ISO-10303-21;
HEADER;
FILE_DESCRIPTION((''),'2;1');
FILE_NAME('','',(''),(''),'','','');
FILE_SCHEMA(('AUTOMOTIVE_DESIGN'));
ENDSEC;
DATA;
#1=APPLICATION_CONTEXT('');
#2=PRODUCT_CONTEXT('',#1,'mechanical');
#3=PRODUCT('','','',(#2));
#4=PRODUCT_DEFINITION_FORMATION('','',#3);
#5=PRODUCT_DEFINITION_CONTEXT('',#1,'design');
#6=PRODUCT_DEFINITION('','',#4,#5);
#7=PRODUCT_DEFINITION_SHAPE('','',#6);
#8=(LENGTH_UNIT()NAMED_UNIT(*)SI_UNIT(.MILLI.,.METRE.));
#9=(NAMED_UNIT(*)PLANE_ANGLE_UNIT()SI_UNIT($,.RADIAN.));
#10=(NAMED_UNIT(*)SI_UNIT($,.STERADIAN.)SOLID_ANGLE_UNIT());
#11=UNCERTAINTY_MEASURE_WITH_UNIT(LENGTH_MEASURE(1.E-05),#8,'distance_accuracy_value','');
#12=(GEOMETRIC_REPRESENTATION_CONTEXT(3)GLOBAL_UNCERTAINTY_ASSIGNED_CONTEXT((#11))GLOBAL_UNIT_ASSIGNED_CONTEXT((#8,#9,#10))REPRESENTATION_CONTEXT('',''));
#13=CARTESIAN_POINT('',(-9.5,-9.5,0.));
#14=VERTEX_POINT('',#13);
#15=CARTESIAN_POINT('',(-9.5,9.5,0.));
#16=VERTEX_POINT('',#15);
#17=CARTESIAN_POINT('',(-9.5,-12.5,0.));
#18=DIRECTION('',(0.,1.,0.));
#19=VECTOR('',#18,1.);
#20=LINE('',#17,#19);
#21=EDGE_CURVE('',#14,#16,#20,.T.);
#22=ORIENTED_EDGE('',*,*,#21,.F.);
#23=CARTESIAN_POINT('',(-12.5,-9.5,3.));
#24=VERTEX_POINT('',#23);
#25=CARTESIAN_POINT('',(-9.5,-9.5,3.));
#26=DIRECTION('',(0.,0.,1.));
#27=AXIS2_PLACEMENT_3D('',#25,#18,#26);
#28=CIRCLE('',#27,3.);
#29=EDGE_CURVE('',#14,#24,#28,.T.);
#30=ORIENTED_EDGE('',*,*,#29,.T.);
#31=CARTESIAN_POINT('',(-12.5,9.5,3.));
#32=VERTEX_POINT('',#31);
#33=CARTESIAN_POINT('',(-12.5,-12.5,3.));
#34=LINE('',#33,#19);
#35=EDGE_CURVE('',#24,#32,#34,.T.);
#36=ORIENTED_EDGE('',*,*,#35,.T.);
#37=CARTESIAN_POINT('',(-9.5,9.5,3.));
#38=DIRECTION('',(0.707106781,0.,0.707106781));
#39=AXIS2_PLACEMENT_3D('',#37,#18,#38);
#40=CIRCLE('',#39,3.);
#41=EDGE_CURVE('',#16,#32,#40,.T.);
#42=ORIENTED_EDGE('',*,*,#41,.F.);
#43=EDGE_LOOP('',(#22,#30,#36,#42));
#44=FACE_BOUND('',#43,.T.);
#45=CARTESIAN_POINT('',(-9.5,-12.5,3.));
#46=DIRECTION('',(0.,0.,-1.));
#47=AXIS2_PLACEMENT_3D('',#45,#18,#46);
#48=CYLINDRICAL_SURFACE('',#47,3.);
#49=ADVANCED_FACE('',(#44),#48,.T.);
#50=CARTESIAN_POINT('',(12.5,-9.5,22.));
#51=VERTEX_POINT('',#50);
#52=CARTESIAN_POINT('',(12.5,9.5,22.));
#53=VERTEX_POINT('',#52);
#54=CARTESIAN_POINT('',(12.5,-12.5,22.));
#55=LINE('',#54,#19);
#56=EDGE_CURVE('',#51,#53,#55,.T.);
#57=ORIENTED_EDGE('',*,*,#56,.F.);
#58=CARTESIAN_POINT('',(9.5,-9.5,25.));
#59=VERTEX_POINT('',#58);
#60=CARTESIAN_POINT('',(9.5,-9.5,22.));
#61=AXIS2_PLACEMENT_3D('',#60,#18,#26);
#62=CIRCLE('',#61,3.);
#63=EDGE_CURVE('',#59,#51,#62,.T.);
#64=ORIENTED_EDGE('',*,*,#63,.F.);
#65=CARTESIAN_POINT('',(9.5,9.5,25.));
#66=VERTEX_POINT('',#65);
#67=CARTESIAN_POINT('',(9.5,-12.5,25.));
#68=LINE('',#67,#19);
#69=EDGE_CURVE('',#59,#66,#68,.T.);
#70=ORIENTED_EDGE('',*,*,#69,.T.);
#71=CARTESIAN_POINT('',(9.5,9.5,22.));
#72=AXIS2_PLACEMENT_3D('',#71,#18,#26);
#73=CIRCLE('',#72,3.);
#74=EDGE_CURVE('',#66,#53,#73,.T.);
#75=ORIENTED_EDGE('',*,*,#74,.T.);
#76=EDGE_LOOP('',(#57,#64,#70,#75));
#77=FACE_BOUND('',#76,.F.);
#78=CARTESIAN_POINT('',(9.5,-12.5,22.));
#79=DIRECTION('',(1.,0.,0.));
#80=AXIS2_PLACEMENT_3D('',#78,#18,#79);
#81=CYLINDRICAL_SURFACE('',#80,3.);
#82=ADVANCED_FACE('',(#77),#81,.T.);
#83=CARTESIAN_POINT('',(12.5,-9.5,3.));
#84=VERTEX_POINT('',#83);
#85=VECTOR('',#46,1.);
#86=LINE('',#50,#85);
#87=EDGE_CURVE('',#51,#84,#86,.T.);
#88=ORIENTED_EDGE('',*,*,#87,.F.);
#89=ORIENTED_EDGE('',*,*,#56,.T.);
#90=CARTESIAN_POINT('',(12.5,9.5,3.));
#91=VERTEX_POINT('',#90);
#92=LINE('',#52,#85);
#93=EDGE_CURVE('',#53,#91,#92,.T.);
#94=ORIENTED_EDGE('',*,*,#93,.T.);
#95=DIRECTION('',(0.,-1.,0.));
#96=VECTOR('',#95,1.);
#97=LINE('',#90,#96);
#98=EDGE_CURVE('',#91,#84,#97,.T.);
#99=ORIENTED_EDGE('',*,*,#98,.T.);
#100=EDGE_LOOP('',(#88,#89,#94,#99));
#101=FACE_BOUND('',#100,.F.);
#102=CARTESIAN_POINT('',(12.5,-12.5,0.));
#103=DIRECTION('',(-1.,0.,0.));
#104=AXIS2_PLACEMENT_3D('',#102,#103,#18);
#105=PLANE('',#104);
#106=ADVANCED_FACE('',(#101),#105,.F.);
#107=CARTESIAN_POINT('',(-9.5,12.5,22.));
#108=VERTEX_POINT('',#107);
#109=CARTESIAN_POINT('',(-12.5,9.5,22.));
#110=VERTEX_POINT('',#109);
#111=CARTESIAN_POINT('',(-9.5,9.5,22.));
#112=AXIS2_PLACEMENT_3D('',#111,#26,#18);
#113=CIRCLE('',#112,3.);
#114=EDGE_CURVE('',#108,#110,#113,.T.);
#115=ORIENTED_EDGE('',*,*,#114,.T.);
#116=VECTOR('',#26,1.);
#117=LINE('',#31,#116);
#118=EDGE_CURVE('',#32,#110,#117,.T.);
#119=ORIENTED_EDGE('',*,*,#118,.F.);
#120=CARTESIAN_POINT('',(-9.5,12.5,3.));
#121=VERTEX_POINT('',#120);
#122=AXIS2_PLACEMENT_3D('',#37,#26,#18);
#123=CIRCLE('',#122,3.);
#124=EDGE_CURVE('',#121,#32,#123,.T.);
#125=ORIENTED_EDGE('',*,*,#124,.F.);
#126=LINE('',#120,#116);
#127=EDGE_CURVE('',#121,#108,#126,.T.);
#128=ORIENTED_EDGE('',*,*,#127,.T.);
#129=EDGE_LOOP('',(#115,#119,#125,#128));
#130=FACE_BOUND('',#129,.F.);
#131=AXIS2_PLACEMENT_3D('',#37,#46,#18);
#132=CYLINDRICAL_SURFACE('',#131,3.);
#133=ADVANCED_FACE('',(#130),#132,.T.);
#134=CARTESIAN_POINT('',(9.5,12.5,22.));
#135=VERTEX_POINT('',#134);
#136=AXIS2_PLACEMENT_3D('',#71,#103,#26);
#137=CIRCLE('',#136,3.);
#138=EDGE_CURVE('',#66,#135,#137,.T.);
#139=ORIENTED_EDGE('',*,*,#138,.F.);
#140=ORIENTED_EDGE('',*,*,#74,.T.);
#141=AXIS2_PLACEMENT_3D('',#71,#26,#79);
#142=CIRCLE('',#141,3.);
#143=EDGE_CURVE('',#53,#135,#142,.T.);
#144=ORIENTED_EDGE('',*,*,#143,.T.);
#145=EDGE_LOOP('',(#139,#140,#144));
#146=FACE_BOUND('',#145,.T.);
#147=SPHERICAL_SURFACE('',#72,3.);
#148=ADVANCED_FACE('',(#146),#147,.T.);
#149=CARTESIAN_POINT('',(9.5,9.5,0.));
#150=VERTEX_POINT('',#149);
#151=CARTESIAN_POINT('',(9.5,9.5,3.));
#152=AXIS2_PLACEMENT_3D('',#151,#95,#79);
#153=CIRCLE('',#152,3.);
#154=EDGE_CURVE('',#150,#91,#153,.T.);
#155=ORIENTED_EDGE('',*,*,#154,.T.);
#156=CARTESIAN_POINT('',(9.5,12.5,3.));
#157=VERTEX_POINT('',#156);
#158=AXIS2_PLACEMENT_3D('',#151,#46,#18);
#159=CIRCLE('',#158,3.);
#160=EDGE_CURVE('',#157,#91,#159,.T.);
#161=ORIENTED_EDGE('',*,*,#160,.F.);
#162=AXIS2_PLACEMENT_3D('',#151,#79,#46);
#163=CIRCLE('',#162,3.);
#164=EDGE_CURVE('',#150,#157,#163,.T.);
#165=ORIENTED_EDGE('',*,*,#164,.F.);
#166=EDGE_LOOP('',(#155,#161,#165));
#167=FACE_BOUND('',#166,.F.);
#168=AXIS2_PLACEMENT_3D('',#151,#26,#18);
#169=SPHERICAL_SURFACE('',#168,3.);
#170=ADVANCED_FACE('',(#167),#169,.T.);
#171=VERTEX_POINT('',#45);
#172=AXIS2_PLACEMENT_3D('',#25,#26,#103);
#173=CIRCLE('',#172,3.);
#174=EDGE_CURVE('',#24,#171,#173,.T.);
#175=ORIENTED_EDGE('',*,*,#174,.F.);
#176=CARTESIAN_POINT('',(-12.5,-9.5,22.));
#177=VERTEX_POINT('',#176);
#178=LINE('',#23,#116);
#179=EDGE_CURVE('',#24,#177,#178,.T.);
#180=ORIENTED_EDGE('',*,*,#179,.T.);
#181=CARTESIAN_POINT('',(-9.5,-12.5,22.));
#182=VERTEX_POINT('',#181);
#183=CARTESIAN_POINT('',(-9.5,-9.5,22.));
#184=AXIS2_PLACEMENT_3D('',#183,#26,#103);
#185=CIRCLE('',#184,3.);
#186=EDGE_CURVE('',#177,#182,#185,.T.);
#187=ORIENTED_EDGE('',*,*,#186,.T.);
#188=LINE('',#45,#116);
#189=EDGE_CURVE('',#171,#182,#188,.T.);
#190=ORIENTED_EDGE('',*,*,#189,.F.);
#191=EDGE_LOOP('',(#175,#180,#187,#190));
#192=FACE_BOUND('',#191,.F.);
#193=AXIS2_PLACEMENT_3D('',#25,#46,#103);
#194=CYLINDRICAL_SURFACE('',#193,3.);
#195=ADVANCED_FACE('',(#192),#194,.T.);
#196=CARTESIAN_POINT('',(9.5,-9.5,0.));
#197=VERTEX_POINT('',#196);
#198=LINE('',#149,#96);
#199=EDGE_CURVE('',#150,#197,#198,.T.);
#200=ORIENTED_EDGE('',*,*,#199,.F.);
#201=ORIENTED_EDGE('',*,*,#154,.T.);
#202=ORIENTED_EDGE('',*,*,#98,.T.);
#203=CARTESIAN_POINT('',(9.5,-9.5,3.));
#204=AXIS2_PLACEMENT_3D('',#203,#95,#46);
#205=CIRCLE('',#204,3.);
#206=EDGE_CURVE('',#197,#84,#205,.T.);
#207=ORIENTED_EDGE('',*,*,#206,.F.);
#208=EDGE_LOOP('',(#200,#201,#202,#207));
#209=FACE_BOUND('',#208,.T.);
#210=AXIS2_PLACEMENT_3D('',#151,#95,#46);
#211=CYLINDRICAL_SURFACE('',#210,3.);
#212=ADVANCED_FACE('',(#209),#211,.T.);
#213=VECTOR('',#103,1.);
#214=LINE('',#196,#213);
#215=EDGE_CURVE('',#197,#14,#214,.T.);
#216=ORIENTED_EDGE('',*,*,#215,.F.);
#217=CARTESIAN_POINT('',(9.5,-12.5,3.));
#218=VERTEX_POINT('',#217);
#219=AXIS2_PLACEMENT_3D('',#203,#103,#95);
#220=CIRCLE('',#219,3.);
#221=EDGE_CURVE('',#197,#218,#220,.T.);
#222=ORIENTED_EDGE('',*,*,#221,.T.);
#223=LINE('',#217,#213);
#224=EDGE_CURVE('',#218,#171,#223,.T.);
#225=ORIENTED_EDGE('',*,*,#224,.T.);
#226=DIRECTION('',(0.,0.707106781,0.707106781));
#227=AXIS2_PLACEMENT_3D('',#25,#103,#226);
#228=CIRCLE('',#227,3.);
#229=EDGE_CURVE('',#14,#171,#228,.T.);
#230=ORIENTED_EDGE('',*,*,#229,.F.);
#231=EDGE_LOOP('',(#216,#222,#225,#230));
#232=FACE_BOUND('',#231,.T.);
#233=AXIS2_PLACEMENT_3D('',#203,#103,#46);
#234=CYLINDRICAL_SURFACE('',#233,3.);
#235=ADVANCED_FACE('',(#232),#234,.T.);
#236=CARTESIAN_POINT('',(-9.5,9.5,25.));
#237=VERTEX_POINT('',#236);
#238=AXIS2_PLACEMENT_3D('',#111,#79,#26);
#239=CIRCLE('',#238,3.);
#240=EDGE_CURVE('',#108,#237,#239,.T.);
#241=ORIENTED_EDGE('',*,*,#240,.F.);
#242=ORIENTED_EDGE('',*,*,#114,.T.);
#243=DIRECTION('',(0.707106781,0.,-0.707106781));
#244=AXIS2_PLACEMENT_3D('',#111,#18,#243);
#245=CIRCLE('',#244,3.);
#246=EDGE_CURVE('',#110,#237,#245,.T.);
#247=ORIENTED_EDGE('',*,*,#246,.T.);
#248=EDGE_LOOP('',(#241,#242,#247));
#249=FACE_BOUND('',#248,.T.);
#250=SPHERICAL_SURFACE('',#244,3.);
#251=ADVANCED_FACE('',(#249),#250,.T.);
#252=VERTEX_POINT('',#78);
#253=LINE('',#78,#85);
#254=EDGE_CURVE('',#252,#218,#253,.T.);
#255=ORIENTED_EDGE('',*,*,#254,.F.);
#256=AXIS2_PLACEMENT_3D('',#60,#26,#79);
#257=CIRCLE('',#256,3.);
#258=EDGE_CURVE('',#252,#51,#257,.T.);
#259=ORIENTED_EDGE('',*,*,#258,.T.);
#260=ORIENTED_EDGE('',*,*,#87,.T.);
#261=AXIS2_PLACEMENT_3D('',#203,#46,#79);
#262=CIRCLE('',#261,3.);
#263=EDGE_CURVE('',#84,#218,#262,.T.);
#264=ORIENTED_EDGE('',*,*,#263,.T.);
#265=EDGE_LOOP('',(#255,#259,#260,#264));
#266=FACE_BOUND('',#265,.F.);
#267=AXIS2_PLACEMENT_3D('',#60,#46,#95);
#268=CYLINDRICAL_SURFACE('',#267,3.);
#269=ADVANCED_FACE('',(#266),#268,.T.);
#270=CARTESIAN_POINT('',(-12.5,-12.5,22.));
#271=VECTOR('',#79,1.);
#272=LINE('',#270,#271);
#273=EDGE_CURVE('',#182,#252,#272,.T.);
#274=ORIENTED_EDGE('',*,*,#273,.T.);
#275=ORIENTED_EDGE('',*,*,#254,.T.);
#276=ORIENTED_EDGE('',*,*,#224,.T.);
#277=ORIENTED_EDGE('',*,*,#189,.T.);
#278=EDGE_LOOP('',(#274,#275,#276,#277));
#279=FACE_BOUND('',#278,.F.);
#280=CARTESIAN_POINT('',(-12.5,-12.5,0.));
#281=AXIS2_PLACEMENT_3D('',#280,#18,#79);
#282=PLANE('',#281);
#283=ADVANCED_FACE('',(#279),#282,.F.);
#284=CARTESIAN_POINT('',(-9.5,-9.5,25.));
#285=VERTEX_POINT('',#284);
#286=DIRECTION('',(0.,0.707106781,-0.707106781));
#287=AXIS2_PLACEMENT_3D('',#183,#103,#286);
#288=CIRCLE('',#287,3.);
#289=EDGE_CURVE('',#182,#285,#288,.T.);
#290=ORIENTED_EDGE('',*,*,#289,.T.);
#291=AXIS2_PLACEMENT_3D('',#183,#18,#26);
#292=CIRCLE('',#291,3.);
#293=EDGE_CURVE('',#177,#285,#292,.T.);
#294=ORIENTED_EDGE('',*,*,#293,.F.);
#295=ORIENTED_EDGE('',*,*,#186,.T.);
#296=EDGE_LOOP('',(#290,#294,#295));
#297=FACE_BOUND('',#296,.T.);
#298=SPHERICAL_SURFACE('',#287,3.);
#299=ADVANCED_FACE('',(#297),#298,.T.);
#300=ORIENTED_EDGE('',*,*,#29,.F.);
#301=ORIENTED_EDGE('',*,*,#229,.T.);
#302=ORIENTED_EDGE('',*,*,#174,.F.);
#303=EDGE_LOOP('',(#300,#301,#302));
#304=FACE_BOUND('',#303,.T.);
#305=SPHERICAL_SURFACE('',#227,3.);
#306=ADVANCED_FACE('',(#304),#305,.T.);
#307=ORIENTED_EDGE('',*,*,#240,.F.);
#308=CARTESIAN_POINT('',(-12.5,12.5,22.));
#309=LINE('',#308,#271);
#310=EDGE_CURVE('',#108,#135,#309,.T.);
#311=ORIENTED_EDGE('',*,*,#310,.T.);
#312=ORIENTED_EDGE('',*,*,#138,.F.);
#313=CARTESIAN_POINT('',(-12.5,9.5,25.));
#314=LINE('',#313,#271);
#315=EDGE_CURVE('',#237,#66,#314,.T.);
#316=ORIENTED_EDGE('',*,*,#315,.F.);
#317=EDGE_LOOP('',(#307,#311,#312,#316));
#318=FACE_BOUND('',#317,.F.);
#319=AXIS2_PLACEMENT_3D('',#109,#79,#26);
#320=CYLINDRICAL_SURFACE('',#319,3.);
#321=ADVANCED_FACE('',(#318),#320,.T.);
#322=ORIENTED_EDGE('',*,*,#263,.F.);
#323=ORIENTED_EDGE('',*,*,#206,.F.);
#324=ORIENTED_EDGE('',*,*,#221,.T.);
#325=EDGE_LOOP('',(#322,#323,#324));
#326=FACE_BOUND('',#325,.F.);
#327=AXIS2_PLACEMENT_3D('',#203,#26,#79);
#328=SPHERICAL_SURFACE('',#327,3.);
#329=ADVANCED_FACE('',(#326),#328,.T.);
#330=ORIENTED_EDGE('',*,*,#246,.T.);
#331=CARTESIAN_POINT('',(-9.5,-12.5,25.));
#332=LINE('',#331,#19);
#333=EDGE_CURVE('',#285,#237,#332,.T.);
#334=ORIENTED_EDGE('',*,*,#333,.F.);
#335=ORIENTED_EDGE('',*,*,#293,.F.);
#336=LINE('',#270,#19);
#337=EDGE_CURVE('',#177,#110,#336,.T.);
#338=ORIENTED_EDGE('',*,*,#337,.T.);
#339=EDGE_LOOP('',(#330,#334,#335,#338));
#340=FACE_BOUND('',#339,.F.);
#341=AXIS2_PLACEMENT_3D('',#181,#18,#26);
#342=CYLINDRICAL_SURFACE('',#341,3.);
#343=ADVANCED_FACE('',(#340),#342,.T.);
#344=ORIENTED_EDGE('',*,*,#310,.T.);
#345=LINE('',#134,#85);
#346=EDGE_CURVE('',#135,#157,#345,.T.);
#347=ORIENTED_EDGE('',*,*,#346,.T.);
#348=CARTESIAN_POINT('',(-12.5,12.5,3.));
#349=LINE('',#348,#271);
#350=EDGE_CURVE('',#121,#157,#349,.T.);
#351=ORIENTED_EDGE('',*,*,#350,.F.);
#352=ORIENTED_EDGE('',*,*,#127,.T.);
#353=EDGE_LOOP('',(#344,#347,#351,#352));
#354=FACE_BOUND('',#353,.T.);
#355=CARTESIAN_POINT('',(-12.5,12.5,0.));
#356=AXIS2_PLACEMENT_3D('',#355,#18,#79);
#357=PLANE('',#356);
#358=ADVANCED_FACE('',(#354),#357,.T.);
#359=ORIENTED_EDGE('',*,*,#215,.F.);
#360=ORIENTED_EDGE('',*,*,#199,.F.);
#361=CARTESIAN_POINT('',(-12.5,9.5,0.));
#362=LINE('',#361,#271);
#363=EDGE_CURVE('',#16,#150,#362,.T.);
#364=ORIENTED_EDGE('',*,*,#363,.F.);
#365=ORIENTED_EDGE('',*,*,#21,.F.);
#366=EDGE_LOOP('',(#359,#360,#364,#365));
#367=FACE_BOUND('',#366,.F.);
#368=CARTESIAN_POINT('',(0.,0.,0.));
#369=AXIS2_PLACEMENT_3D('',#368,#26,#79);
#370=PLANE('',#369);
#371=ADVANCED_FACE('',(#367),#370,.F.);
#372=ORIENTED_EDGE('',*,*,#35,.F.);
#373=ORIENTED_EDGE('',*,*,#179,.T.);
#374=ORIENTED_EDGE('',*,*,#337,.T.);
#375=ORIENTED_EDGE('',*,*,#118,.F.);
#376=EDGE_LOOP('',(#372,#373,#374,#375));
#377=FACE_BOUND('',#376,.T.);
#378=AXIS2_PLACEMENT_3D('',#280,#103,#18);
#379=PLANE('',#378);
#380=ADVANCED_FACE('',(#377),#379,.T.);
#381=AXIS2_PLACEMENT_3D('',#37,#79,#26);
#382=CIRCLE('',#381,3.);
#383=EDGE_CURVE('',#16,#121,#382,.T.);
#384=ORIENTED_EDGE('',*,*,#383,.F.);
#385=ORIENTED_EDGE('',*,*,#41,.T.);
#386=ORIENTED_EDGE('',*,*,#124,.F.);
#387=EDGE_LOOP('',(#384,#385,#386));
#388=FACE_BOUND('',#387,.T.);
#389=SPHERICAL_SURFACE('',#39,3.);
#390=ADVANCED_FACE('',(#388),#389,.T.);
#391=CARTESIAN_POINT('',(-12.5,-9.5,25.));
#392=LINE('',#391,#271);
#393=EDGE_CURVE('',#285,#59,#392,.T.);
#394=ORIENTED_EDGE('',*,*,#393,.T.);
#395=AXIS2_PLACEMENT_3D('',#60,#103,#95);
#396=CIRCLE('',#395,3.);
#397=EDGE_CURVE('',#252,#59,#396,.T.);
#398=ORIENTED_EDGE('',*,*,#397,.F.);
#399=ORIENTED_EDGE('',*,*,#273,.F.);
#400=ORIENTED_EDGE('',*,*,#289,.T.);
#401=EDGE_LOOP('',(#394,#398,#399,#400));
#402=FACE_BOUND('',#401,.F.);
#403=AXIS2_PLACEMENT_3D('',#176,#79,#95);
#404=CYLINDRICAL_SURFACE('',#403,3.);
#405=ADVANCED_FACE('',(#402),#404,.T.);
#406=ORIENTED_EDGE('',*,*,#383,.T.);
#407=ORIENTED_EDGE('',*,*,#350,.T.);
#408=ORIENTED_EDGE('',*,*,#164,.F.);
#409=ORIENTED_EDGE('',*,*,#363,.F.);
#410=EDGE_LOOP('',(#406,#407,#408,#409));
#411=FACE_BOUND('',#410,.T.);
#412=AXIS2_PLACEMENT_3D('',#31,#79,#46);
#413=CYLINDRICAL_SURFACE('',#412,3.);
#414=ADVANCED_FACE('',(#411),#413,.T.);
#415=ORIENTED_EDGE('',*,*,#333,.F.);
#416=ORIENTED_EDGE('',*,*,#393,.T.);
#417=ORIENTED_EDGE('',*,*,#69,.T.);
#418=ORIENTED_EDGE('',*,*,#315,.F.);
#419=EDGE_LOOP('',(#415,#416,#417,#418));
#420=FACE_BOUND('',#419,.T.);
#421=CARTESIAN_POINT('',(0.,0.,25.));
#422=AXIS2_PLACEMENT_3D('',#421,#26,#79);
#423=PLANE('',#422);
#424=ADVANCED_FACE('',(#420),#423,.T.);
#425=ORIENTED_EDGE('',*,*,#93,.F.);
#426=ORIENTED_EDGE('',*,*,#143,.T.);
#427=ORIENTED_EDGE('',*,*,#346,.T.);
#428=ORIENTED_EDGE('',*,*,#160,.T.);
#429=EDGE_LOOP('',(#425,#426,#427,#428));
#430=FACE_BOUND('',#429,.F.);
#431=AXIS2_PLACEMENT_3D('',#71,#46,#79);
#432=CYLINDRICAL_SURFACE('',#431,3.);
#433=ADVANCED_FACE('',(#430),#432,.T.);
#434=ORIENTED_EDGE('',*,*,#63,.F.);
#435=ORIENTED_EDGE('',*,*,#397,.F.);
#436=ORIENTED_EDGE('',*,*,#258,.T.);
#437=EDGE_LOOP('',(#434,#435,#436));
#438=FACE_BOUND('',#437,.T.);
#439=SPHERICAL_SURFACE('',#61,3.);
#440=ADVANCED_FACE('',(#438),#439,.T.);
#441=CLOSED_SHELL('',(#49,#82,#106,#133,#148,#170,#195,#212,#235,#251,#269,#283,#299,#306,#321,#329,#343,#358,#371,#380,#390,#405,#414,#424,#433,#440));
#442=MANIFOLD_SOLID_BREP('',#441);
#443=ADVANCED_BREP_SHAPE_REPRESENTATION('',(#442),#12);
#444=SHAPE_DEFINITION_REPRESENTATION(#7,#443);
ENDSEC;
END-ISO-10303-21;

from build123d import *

# Parameters (mm, degrees)
F0_W         = 25
F0_H         = 25
F1_DEPTH     = 25
F2_R         = 3
F3_R         = 3
F4_R         = 3
F5_T1_DEPTH  = 19
F5_S5_W      = 3
F5_S5_H      = 3
F5_T6_DEPTH  = 3
F5_S11_W     = 3
F5_S11_H     = 3
F5_T12_DEPTH = 3
F5_S17_W     = 3
F5_S17_H     = 3
F5_T18_DEPTH = 3
F5_S23_W     = 3
F5_S23_H     = 3
F5_T24_DEPTH = 3


# Not quite as in the source:
# - a fillet or chamfer that OpenCascade refuses, or shapes differently, is made with other operations: its cross-section is extruded or revolved along the edge and cut away or added
# - a feature names something its author has since deleted; it is built from what else it names


with BuildPart() as f1:
    # F0 (on Top) → F1 (new body)
    with BuildSketch(Plane.XY):
        Rectangle(F0_W, F0_H)
    extrude(amount=F1_DEPTH)

    # F2
    f2_edges = [f1.edges().sort_by_distance(p)[0] for p in [
        (12.5, 0, 25),
    ]]
    fillet(f2_edges, radius=F2_R)

    # F3
    f3_edges = [f1.edges().sort_by_distance(p)[0] for p in [
        (-1.5, 12.5, 25),
        (9.5, 0, 25),
        (-12.5, 0, 25),
        (-1.5, -12.5, 25),
    ]]
    fillet(f3_edges, radius=F3_R)

    # F4
    f4_edges = [f1.edges().sort_by_distance(p)[0] for p in [
        (-1.5, 12.5, 0),
        (11.62132, 11.62132, 0),
        (-12.5, 0, 0),
        (12.5, 0, 0),
        (-1.5, -12.5, 0),
        (11.62132, -11.62132, 0),
    ]]
    fillet(f4_edges, radius=F4_R)

    # F5: fillet of radius 3 on 2 edges, made by hand

    # F5_s2 → F5_t1 (cut)
    with BuildSketch(Plane.XY.offset(3)):
        with BuildLine():
            ThreePointArc((-9.5, 12.5), (-11.6213203436, 11.6213203436), (-12.5, 9.5))
            Line((-12.5, 9.5), (-12.5, 12.5))
            Line((-12.5, 12.5), (-9.5, 12.5))
        make_face()
        with BuildLine():
            ThreePointArc((-12.5, -9.5), (-11.6213203436, -11.6213203436), (-9.5, -12.5))
            Line((-9.5, -12.5), (-12.5, -12.5))
            Line((-12.5, -12.5), (-12.5, -9.5))
        make_face()
    extrude(amount=F5_T1_DEPTH, mode=Mode.SUBTRACT)


with BuildPart() as f5_tool4:
    # F5_s5 → F5_t6 (new body)
    with BuildSketch(Plane.YZ.offset(-9.5)):
        with Locations((-11, 1.5)):
            Rectangle(F5_S5_W, F5_S5_H)
    extrude(amount=-F5_T6_DEPTH)

    # F5_s7 → F5_t8 (revolve, cut)
    with BuildSketch(Plane(origin=(-9.5, -9.5, 3), x_dir=(0, 0.7071067812, 0.7071067812), z_dir=(0, -0.7071067812, 0.7071067812))):
        with BuildLine():
            ThreePointArc((0, -3), (3, 0), (0, 3))
            Line((0, 3), (0, -3))
        make_face()
    revolve(axis=Axis((-9.5, -9.5, 3), (-1, 0, 0)), mode=Mode.SUBTRACT)


with BuildPart() as f1_1:
    add(f1.part)

    # F5_t3: cut F5_tool4
    add(f5_tool4.part, mode=Mode.SUBTRACT)


with BuildPart() as f5_tool10:
    # F5_s11 → F5_t12 (new body)
    with BuildSketch(Plane.YZ.offset(-9.5)):
        with Locations((-11, 23.5)):
            Rectangle(F5_S11_W, F5_S11_H)
    extrude(amount=-F5_T12_DEPTH)

    # F5_s13 → F5_t14 (revolve, cut)
    with BuildSketch(Plane(origin=(-9.5, -9.5, 22), x_dir=(0, 0.7071067812, -0.7071067812), z_dir=(0, 0.7071067812, 0.7071067812))):
        with BuildLine():
            ThreePointArc((0, -3), (3, 0), (0, 3))
            Line((0, 3), (0, -3))
        make_face()
    revolve(axis=Axis((-9.5, -9.5, 22), (-1, 0, 0)), mode=Mode.SUBTRACT)


with BuildPart() as f1_2:
    add(f1_1.part)

    # F5_t9: cut F5_tool10
    add(f5_tool10.part, mode=Mode.SUBTRACT)


with BuildPart() as f5_tool16:
    # F5_s17 → F5_t18 (new body)
    with BuildSketch(Plane.XZ.offset(-9.5)):
        with Locations((-11, 1.5)):
            Rectangle(F5_S17_W, F5_S17_H)
    extrude(amount=-F5_T18_DEPTH)

    # F5_s19 → F5_t20 (revolve, cut)
    with BuildSketch(Plane(origin=(-9.5, 9.5, 3), x_dir=(0.7071067812, 0, 0.7071067812), z_dir=(-0.7071067812, 0, 0.7071067812))):
        with BuildLine():
            ThreePointArc((0, -3), (3, 0), (0, 3))
            Line((0, 3), (0, -3))
        make_face()
    revolve(axis=Axis((-9.5, 9.5, 3), (0, 1, 0)), mode=Mode.SUBTRACT)


with BuildPart() as f1_3:
    add(f1_2.part)

    # F5_t15: cut F5_tool16
    add(f5_tool16.part, mode=Mode.SUBTRACT)


with BuildPart() as f5_tool22:
    # F5_s23 → F5_t24 (new body)
    with BuildSketch(Plane.XZ.offset(-9.5)):
        with Locations((-11, 23.5)):
            Rectangle(F5_S23_W, F5_S23_H)
    extrude(amount=-F5_T24_DEPTH)

    # F5_s25 → F5_t26 (revolve, cut)
    with BuildSketch(Plane(origin=(-9.5, 9.5, 22), x_dir=(0.7071067812, 0, -0.7071067812), z_dir=(0.7071067812, 0, 0.7071067812))):
        with BuildLine():
            ThreePointArc((0, -3), (3, 0), (0, 3))
            Line((0, 3), (0, -3))
        make_face()
    revolve(axis=Axis((-9.5, 9.5, 22), (0, 1, 0)), mode=Mode.SUBTRACT)


with BuildPart() as f1_4:
    add(f1_3.part)

    # F5_t21: cut F5_tool22
    add(f5_tool22.part, mode=Mode.SUBTRACT)


solid = f1_4.part
